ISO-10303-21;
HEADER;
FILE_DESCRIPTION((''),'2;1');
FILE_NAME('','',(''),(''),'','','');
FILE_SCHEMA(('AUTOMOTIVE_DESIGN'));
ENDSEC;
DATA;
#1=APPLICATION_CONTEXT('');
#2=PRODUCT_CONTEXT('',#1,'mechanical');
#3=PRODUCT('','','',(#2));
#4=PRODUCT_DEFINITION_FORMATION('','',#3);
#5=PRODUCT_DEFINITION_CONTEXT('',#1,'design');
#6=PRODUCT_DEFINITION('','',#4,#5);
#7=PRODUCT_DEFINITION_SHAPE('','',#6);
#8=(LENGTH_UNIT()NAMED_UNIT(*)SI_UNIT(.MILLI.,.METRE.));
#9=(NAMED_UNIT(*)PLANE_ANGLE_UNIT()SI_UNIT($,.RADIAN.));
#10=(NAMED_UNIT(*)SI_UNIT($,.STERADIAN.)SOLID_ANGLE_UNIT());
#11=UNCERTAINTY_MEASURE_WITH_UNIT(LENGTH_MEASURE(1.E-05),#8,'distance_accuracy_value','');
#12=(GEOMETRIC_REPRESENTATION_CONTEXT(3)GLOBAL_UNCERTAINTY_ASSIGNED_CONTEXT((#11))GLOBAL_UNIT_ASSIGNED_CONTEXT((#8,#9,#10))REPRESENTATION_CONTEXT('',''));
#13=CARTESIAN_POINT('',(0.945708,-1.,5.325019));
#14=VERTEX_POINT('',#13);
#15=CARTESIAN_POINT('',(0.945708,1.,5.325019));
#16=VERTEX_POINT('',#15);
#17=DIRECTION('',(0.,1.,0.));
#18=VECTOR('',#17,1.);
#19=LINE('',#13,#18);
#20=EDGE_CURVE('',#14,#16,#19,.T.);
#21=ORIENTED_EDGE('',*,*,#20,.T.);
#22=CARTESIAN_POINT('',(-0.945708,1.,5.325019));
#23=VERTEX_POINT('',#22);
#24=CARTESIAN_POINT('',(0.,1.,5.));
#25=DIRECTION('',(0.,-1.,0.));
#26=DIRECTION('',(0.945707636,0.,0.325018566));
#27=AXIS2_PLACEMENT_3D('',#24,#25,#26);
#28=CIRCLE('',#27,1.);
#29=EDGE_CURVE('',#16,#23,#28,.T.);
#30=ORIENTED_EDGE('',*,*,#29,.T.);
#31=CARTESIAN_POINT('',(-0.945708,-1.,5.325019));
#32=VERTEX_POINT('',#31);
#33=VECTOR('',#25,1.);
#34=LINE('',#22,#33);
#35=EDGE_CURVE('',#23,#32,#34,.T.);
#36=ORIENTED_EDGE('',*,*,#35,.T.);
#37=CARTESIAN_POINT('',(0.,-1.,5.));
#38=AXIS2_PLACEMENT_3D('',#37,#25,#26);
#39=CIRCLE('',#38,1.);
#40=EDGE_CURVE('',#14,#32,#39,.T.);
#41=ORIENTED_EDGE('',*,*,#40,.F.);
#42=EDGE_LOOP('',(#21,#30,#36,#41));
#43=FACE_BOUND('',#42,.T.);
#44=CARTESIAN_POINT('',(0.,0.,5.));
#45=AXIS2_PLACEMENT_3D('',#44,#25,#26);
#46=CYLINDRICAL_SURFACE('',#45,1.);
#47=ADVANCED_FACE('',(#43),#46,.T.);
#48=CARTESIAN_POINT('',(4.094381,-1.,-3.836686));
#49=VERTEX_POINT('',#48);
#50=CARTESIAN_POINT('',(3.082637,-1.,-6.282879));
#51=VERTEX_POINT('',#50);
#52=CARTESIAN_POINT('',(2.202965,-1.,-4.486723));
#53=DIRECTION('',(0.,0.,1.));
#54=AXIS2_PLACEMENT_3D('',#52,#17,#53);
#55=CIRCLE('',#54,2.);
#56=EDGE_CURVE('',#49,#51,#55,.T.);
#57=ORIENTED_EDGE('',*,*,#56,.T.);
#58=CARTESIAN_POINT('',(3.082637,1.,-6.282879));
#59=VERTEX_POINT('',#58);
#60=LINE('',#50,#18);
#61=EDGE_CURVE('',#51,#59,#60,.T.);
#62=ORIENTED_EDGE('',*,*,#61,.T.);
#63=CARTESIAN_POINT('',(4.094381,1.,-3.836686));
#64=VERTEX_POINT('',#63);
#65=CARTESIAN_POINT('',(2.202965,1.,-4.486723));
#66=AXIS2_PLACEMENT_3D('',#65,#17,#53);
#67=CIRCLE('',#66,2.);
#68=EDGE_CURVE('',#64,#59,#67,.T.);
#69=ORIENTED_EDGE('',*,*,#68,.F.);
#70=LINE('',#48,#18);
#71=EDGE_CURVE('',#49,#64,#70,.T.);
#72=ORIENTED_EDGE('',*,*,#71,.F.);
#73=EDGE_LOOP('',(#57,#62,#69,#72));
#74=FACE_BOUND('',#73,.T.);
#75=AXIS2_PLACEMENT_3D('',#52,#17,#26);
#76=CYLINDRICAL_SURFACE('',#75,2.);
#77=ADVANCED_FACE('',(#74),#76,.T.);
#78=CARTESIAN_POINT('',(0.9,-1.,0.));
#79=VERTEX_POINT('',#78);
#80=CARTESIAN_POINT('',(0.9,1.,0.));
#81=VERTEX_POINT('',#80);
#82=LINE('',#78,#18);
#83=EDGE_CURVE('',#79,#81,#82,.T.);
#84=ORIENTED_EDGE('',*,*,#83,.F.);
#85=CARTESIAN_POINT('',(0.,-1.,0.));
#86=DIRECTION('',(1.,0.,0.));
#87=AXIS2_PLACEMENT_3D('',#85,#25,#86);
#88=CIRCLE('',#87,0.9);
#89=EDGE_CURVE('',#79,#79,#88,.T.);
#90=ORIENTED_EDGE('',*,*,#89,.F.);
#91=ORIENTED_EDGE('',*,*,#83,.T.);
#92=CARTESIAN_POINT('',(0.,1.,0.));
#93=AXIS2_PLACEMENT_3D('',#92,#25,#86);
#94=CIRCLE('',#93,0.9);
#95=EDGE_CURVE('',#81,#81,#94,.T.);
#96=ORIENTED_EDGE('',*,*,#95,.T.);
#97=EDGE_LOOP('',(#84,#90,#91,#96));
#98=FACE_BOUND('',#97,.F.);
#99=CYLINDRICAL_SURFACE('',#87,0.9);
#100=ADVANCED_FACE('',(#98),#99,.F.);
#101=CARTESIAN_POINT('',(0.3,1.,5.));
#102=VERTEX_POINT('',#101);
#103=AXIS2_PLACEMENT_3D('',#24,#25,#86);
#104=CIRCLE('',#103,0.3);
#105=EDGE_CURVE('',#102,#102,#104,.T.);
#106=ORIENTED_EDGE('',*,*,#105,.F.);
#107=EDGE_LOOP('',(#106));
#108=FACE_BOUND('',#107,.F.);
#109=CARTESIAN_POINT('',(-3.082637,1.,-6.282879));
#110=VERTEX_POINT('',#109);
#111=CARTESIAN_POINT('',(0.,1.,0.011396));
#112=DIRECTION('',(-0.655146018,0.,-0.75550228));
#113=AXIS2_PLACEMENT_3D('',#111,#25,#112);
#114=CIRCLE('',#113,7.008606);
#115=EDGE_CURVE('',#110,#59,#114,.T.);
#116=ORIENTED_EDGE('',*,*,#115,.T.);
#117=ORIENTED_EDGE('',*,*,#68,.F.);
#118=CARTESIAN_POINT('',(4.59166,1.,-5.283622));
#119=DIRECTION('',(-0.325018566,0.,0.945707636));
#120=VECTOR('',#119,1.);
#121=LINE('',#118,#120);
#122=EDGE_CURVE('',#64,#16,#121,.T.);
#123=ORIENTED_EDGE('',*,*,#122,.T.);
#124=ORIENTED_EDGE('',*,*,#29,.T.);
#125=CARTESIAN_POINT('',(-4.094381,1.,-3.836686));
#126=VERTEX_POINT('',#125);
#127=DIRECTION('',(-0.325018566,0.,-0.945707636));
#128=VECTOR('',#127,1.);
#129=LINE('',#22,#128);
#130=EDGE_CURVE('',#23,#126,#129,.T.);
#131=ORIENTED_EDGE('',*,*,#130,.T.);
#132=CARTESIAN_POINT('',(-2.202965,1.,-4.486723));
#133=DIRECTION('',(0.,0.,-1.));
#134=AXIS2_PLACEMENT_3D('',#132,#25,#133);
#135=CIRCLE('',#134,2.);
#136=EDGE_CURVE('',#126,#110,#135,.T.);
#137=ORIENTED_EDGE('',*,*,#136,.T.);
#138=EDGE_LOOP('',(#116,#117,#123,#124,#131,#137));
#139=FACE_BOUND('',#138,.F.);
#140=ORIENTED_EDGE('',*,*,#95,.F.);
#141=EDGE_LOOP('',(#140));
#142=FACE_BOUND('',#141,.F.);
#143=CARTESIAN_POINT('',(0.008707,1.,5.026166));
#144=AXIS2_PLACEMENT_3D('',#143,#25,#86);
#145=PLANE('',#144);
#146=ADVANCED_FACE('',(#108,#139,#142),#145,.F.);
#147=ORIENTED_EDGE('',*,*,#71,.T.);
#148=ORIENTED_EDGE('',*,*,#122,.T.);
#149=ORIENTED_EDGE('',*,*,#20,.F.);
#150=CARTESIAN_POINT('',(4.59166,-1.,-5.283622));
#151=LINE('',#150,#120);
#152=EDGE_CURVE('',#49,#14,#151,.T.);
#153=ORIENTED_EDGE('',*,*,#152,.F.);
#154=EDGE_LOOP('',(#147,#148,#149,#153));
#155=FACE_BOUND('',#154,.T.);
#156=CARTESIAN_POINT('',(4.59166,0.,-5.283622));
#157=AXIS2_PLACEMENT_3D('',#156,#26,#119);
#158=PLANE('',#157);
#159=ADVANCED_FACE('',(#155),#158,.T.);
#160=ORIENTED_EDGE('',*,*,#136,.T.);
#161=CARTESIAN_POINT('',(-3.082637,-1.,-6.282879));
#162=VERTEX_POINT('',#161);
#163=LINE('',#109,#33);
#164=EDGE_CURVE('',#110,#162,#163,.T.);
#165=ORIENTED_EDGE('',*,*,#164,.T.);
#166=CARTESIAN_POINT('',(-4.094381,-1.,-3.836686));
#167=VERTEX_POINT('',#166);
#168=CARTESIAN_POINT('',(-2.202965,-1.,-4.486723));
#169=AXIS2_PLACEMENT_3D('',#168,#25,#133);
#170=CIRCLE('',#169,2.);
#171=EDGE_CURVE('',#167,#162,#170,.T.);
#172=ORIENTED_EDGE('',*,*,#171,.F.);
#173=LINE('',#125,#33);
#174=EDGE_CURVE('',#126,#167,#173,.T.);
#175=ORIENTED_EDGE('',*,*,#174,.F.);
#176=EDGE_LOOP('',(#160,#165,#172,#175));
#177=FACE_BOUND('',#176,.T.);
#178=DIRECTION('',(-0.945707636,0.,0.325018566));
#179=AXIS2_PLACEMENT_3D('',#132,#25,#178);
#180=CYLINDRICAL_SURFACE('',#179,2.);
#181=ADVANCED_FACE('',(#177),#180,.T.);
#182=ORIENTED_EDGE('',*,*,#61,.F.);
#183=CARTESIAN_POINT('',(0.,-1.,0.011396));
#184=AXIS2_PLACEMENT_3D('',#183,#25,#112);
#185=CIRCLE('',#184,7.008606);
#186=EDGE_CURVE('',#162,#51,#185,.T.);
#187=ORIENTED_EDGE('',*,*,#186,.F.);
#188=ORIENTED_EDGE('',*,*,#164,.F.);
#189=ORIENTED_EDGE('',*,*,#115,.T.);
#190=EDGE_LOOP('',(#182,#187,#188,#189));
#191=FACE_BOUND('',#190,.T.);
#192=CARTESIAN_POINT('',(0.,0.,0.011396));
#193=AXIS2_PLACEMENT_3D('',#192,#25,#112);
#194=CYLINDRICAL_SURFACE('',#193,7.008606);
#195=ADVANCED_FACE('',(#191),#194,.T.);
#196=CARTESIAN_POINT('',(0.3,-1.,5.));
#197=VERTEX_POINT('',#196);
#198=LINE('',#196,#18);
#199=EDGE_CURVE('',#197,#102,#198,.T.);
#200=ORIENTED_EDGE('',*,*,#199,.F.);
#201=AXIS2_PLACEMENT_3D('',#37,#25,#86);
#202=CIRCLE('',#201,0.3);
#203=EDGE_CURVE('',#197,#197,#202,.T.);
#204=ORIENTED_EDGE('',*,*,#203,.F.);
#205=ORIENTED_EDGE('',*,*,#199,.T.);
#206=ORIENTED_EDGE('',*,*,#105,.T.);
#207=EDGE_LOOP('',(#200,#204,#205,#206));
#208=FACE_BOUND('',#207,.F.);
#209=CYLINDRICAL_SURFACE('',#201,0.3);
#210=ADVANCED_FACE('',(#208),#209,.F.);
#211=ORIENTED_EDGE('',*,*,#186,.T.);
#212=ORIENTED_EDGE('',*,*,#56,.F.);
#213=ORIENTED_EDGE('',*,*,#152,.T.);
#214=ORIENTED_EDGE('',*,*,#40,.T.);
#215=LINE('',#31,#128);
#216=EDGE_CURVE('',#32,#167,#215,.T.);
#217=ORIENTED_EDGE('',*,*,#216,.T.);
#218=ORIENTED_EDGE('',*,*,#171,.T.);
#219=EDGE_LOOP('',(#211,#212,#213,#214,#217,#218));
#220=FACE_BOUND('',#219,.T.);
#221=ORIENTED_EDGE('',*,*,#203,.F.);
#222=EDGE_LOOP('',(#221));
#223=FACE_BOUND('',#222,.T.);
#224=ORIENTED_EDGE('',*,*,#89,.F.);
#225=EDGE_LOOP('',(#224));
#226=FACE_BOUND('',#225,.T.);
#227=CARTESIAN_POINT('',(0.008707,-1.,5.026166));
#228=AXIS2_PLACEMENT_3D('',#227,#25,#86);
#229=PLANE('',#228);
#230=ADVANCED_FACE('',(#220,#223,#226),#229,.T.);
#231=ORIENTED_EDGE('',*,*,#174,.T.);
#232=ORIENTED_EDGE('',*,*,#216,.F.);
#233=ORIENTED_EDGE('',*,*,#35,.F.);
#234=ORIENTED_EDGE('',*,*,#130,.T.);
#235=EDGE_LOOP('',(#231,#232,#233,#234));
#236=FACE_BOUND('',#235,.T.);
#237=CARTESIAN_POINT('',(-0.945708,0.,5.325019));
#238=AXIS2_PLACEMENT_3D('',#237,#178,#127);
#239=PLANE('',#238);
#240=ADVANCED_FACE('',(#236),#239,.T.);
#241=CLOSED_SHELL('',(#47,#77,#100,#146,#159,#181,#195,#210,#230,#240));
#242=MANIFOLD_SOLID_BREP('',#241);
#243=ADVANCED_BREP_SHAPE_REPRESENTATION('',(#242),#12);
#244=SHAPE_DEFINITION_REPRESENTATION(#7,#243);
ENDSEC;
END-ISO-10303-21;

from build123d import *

# Parameters (mm, degrees)
F1_DEPTH = 1
F2_R     = 0.9
F2_R_2   = 0.3
F3_DEPTH = 2.001
F4_R     = 2


# Not quite as in the source:
# - a feature names something its author has since deleted; it is built from what else it names


with BuildPart() as f1:
    # F0 (on Front) → F1 (new body, symmetric)
    with BuildSketch(Plane.XZ):
        with BuildLine():
            ThreePointArc((-0.9457076356, 5.3250185657), (-0.1647609851, 4.0136664774), (1, 5))
            ThreePointArc((1, 5), (0.9863335226, 5.1647609851), (0.9457076356, 5.3250185657))
            ThreePointArc((0.9457076356, 5.3250185657), (0, 6), (-0.9457076356, 5.3250185657))
        make_face()
        with BuildLine():
            ThreePointArc((0.9457076356, 5.3250185657), (0.9863335226, 5.1647609851), (1, 5))
            ThreePointArc((1, 5), (-0.1647609851, 4.0136664774), (-0.9457076356, 5.3250185657))
            Line((-0.9457076356, 5.3250185657), (-4.5916600475, -5.2836216754))
            ThreePointArc((-4.5916600475, -5.2836216754), (0, -6.9972097643), (4.5916600475, -5.2836216754))
            Line((4.5916600475, -5.2836216754), (0.9457076356, 5.3250185657))
        make_face()
    extrude(amount=F1_DEPTH, both=True)

    # F2 (on face) → F3 (cut, through all)
    with BuildSketch(Plane.XZ.offset(1)):
        Circle(F2_R)
        with Locations((0, 5)):
            Circle(F2_R_2)
    extrude(amount=-F3_DEPTH, mode=Mode.SUBTRACT)

    # F4
    f4_edges = [f1.edges().sort_by_distance(p)[0] for p in [
        (4.59166, 0, -5.283622),
        (-4.59166, 0, -5.283622),
    ]]
    fillet(f4_edges, radius=F4_R)


solid = f1.part
